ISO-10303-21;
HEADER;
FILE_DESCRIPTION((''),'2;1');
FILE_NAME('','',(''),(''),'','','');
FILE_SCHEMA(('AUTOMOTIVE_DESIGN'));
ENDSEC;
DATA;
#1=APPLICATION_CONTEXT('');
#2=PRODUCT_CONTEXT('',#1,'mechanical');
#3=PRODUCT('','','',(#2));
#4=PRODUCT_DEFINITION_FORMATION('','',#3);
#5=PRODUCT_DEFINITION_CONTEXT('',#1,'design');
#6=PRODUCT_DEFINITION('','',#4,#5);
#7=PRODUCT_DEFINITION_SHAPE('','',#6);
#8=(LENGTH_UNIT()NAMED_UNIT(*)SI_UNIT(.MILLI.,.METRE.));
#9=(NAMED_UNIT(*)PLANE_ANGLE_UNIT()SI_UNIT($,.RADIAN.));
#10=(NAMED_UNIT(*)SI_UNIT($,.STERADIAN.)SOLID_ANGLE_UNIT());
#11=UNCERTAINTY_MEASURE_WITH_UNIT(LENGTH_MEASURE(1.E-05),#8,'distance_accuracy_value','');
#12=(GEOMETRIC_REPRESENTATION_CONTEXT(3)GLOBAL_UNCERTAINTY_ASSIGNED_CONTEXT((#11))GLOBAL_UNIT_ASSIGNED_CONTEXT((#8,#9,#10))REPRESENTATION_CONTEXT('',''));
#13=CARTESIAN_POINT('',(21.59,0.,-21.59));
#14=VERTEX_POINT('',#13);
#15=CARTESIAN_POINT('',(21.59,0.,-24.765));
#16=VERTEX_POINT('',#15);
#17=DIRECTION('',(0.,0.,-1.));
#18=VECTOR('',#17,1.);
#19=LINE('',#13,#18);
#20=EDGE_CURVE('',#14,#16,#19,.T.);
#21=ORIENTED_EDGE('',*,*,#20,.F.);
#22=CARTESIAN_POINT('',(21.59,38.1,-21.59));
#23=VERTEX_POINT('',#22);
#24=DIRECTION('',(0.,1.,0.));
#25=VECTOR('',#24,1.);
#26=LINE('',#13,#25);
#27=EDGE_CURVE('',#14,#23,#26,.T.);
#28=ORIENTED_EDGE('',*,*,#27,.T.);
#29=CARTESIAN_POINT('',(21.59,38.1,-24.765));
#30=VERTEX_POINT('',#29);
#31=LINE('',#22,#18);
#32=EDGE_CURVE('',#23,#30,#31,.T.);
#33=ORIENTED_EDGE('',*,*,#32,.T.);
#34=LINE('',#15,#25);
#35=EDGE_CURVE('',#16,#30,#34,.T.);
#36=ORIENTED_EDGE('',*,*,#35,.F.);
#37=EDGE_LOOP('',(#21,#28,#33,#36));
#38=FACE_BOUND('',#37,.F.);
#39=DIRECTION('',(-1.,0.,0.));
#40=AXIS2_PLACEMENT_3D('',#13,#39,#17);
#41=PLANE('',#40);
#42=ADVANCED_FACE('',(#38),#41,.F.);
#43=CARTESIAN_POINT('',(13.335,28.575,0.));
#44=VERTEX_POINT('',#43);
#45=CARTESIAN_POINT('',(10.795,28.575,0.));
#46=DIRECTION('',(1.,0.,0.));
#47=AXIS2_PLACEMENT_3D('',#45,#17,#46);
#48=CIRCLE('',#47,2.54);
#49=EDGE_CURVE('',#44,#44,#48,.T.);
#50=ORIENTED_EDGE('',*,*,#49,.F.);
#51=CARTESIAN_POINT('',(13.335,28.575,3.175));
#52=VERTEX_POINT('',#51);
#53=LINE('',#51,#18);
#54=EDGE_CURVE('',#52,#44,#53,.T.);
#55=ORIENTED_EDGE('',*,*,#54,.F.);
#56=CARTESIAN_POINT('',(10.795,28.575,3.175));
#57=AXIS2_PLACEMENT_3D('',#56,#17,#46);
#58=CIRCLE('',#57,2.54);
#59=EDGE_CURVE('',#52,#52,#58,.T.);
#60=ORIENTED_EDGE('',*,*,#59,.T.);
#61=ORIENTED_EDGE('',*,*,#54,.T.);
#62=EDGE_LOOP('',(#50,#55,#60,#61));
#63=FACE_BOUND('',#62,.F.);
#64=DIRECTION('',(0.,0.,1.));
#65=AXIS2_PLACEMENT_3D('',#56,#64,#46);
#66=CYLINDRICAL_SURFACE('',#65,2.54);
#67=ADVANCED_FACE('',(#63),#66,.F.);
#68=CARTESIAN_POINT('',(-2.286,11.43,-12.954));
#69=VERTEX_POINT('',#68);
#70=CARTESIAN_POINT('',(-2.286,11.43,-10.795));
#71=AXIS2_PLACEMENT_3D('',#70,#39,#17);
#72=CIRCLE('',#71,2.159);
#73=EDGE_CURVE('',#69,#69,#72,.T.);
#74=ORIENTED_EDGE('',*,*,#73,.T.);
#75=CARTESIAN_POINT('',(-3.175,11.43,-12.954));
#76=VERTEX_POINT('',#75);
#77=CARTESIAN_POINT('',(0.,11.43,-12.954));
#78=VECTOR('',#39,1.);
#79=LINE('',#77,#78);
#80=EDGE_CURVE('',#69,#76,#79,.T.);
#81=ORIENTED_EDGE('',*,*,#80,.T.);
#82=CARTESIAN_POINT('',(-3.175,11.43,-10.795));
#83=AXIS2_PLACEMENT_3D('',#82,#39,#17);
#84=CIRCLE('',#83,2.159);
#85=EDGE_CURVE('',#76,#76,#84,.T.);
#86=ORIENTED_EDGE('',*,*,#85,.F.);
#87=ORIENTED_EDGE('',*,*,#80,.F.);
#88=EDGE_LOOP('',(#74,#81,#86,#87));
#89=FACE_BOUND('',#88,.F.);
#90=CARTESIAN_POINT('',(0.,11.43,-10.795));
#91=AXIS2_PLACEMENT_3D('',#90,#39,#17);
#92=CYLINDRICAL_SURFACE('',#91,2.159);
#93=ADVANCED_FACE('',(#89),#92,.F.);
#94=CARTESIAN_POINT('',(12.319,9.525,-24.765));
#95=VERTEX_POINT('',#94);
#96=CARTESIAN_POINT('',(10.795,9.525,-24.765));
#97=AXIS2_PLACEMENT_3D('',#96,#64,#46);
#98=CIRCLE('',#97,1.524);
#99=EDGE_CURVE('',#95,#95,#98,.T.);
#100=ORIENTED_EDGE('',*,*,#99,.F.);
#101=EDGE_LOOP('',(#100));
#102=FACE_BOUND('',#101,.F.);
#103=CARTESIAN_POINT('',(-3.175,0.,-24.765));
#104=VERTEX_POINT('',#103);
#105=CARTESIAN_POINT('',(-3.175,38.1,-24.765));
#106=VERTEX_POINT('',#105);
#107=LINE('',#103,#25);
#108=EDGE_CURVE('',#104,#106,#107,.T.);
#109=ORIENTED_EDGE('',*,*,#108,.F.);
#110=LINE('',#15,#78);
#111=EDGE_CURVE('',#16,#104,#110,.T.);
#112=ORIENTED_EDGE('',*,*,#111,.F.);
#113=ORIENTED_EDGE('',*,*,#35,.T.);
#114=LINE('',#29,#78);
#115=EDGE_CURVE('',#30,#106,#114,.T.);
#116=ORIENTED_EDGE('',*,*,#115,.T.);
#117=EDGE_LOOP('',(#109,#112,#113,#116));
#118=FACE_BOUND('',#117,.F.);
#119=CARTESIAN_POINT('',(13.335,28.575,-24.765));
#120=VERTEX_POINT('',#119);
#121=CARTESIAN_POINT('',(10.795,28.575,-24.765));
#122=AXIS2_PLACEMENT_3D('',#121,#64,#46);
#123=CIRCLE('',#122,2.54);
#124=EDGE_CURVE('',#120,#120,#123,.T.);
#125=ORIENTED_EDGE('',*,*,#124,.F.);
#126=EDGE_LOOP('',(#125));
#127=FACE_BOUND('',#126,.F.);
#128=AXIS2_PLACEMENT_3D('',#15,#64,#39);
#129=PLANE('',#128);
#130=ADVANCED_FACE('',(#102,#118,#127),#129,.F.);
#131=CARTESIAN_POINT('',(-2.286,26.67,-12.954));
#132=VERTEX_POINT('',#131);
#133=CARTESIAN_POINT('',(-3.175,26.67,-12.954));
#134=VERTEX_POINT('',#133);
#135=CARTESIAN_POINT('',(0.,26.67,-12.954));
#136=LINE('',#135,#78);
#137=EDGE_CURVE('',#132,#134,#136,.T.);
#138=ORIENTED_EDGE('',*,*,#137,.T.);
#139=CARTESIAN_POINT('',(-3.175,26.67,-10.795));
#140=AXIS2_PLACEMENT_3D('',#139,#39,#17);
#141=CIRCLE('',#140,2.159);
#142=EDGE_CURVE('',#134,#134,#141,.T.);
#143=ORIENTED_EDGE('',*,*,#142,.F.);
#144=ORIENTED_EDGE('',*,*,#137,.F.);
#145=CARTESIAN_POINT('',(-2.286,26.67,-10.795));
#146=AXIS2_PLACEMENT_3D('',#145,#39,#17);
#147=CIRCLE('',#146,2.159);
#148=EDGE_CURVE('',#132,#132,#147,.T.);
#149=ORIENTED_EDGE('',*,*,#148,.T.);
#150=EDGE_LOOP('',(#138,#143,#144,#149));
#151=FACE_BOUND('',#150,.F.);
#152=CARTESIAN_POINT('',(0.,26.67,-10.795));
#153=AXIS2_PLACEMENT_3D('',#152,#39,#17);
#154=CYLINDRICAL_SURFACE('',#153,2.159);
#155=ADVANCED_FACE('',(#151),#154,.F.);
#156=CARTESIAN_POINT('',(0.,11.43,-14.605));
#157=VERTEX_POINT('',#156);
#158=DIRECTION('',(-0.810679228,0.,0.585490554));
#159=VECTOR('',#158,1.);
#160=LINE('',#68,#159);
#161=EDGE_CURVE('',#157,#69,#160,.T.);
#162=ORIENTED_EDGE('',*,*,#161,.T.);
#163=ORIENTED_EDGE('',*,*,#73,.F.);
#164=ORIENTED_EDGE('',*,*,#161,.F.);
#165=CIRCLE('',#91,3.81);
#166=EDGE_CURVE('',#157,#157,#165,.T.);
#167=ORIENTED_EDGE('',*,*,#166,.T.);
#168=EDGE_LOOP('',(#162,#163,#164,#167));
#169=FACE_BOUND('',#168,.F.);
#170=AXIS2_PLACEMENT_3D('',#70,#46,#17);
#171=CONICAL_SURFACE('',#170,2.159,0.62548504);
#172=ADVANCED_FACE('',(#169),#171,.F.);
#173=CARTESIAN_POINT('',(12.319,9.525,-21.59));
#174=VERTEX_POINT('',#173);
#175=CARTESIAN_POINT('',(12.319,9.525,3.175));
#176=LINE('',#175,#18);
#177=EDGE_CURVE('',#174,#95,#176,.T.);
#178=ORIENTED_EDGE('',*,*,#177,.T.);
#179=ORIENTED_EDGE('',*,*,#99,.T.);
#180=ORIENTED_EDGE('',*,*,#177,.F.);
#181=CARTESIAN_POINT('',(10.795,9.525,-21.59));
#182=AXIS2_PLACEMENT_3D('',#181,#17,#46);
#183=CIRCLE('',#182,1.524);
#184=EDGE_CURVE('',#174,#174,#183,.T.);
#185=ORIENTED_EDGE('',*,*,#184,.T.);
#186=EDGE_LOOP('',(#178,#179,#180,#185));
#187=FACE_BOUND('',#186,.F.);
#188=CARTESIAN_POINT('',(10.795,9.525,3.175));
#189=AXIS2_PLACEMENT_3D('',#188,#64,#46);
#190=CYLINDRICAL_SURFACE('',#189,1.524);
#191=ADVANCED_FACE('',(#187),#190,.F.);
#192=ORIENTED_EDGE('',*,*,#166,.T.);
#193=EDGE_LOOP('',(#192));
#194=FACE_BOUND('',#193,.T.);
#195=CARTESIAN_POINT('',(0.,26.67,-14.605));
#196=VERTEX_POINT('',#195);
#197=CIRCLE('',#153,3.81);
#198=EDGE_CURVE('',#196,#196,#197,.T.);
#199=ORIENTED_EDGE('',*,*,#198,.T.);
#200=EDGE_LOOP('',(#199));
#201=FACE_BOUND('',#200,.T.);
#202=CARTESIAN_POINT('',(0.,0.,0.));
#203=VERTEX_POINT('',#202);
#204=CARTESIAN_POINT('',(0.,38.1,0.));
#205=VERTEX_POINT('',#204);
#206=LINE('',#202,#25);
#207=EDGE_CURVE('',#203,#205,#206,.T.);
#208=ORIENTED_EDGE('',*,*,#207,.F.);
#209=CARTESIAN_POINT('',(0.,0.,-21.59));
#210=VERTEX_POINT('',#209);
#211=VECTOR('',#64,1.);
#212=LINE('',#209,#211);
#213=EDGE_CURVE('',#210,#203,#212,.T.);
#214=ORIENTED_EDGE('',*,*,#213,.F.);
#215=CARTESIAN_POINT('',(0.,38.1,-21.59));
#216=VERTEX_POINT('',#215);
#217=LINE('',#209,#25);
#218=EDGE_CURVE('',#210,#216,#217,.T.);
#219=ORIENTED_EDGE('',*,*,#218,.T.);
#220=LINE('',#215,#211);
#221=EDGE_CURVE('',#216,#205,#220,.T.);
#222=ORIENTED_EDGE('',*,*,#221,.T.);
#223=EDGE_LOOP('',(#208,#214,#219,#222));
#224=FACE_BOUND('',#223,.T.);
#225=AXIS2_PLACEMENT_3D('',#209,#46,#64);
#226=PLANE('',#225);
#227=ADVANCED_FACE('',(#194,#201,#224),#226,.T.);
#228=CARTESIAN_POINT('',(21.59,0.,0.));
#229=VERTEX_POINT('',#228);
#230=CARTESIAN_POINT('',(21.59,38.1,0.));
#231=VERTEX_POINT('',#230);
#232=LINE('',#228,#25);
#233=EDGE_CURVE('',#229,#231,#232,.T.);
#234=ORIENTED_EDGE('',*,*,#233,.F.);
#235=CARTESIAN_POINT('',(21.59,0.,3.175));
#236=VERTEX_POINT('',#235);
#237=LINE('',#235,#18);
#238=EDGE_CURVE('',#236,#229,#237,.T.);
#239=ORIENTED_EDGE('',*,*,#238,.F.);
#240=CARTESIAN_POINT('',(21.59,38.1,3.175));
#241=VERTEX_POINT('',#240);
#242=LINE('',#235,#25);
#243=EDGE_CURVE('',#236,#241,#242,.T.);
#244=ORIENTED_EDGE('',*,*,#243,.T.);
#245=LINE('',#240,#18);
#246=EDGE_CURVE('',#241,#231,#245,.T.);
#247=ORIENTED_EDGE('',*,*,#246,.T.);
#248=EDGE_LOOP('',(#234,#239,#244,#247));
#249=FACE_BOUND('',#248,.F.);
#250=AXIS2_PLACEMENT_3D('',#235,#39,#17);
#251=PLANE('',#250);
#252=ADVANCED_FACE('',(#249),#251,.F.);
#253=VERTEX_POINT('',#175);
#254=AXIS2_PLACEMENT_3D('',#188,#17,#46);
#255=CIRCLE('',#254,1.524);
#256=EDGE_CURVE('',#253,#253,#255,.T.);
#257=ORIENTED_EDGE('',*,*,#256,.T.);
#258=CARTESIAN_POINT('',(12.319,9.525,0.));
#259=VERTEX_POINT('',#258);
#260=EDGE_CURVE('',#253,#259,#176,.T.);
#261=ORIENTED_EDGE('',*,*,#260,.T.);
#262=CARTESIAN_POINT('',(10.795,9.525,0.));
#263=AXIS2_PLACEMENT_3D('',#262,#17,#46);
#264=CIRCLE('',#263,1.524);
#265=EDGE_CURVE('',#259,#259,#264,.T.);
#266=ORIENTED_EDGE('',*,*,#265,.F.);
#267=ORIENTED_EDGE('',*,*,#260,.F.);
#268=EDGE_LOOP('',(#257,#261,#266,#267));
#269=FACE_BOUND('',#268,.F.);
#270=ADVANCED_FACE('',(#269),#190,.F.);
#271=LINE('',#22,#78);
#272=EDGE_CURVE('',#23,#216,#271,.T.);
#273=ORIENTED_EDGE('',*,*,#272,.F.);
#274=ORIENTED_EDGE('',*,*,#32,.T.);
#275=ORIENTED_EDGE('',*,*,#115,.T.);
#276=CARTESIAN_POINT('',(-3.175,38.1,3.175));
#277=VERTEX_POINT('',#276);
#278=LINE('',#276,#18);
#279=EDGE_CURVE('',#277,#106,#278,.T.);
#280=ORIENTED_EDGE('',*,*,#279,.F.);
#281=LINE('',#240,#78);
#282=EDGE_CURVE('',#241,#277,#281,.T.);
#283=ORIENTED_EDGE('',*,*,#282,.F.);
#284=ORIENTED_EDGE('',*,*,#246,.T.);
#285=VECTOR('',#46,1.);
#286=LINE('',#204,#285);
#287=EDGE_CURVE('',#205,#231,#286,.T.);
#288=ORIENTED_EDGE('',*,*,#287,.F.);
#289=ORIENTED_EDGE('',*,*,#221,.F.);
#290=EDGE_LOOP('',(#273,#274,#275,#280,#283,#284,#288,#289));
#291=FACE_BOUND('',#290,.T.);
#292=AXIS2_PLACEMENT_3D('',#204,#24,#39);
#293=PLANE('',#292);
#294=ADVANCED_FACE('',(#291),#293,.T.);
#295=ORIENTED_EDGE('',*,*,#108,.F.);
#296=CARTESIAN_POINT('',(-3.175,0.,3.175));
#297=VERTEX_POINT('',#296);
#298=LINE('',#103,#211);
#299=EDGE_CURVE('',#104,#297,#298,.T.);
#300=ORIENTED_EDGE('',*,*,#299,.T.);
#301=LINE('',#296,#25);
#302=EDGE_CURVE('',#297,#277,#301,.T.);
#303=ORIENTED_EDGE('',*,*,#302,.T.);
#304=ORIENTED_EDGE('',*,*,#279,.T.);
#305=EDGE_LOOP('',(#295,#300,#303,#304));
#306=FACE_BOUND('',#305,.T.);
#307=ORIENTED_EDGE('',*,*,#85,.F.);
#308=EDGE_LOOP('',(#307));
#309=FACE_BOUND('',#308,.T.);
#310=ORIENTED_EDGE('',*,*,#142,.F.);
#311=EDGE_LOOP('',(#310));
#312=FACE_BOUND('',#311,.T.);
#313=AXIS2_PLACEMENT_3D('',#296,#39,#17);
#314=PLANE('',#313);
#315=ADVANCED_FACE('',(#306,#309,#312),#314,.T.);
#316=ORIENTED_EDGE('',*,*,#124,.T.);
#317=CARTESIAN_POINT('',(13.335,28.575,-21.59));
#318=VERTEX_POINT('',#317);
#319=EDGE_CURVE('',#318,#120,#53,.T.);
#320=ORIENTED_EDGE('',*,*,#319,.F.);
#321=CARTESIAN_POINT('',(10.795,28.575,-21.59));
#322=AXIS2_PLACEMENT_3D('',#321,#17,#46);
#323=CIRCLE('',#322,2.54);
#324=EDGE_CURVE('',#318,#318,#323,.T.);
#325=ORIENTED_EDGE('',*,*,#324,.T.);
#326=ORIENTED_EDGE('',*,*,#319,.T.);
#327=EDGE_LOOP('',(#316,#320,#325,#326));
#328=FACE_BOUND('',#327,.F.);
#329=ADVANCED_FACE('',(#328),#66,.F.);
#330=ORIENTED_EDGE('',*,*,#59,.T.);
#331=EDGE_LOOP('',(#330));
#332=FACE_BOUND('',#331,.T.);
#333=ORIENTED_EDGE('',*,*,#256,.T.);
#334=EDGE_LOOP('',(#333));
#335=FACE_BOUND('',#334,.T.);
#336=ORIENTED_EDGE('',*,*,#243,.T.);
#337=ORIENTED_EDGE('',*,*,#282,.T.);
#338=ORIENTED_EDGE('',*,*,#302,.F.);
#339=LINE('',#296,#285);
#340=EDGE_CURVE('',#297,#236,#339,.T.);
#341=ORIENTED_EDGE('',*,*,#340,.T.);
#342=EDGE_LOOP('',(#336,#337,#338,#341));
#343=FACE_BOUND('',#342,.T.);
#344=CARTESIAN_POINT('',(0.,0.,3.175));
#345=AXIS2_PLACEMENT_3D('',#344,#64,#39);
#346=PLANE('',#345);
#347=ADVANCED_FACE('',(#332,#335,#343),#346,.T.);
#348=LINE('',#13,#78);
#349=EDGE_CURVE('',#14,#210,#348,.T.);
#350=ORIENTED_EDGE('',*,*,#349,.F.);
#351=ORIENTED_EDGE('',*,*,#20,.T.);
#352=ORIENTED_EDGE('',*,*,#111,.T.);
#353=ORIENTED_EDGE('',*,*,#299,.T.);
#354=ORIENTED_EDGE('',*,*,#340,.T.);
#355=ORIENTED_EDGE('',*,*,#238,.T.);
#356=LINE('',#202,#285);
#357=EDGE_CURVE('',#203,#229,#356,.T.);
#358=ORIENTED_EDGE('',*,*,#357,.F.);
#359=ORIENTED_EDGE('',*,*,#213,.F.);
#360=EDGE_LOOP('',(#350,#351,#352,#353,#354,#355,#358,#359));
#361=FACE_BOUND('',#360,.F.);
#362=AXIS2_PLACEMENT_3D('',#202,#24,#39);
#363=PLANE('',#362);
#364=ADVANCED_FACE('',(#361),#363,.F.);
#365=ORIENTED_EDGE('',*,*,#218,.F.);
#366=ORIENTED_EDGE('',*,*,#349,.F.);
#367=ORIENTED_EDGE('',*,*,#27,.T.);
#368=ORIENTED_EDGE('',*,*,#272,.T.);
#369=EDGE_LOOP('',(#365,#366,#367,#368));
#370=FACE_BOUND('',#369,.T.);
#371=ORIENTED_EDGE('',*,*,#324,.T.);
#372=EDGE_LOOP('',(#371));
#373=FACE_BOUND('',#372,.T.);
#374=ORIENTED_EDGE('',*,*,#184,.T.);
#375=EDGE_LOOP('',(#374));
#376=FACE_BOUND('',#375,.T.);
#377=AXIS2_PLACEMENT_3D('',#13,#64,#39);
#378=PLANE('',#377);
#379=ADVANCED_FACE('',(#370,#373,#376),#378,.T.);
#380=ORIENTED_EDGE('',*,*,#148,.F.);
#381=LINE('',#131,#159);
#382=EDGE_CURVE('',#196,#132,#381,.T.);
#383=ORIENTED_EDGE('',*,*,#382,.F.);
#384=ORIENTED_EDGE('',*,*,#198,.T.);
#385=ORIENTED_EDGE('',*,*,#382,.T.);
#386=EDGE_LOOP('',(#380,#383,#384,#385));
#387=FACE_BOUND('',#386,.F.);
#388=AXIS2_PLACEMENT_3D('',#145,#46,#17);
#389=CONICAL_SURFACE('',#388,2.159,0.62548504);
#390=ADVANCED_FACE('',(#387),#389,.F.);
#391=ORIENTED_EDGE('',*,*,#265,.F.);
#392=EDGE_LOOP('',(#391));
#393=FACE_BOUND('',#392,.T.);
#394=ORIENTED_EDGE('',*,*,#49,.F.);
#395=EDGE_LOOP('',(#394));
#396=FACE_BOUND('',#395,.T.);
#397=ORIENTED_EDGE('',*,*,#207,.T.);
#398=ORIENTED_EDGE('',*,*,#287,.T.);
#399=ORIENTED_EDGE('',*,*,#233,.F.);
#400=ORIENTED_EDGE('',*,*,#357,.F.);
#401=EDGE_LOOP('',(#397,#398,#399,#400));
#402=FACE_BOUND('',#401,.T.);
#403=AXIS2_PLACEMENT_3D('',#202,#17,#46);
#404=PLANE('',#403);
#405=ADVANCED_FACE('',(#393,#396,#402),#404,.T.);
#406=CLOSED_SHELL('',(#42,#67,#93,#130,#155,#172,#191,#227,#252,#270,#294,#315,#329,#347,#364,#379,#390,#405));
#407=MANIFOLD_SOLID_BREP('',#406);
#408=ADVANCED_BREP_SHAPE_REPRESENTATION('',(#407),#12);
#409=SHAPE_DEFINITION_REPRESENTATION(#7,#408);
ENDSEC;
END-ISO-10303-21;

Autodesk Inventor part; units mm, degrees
ref_plane "YZ Plane" through (0, 0, 0) normal (1, 0, 0) x (0, 1, 0)
ref_plane "XZ Plane" through (0, 0, 0) normal (0, 1, 0) x (-1, 0, 0)
ref_plane "XY Plane" through (0, 0, 0) normal (0, 0, 1) x (1, 0, 0)
sketch "Sketch1" plane through (0, 0, 0) normal (0, 1, 0) x (-1, 0, 0)
  line L0 (0, 0) -> (-21.59, 0)
  line L1 (-21.59, 0) -> (-21.59, -21.59)
  line L2 (-21.59, -21.59) -> (0, -21.59)
  line L3 (0, -21.59) -> (0, 0)
  line L4 (-21.59, 0) -> (0, 0)
  line L5 (0, 0) -> (0, 3.175)
  line L6 (0, 3.175) -> (-21.59, 3.175)
  line L7 (-21.59, 3.175) -> (-21.59, 0)
  line L8 (0, 3.175) -> (3.175, 3.175)
  line L9 (3.175, 3.175) -> (3.175, -21.59)
  line L10 (3.175, -21.59) -> (0, -21.59)
  line L11 (0, -21.59) -> (0, 3.175)
  line L12 (3.175, -21.59) -> (-21.59, -21.59)
  line L13 (-21.59, -21.59) -> (-21.59, -24.765)
  line L14 (-21.59, -24.765) -> (3.175, -24.765)
  line L15 (3.175, -24.765) -> (3.175, -21.59)
  dimension "d0" = 21.59
  dimension "d1" = 21.59
  dimension "d2" = 3.175
  dimension "d3" = 3.175
extrude "Extrusion1" add sketch "Sketch1" along normal blind 38.1 contours L5 L8 L9 L10 L3 | L0 L7 L6 L5 | L10 L15 L14 L13 L2
sketch "Sketch2" plane through (0, 0, 0) normal (1, 0, 0) x (0, 0, -1)
  line L0 (0, 0) -> (21.59, 0) projected
  line L1 (10.795, 0) -> (10.795, 11.43)
  line L2 (10.795, 0) -> (22.225, 0) construction
  line L3 (0, 38.1) -> (21.59, 38.1) projected
  line L4 (10.795, 38.1) -> (10.795, 26.67)
  line L5 (10.795, 38.1) -> (22.225, 38.1) construction
  circle A0 centre (10.795, 26.67) radius 2.159
  circle A1 centre (10.795, 11.43) radius 2.159
  dimension "d6" = 11.43
  dimension "d7" = 90
  dimension "d8" = 11.43
  dimension "d9" = 90
  dimension "d10" = 15.24
  dimension "d11" = 4.318
  dimension "d12" = 4.318
hole "Hole1" at (0, 26.67, -10.795) at (0, 11.43, -10.795) direction (-1, 0, 0) diameter 4.318 depth 25.4
sketch "Sketch3" plane through (-3.175, 0, 3.175) normal (0, 0, 1) x (1, 0, 0)
  line L0 (3.175, 38.1) -> (24.765, 38.1) projected
  line L1 (13.97, 38.1) -> (13.97, 28.575)
  circle A0 centre (13.97, 28.575) radius 2.54
  point P0 (3.175, 0)
  dimension "d20" = 9.525
  dimension "d21" = 5.08
extrude "Extrusion2" cut sketch "Sketch3" against normal blind 38.1
sketch "Sketch4" plane through (-3.175, 0, 3.175) normal (0, 0, 1) x (1, 0, 0)
  line L0 (24.765, 0) -> (3.175, 0) projected
  line L1 (13.97, 0) -> (13.97, 9.525)
  circle A0 centre (13.97, 9.525) radius 1.524
  dimension "d25" = 9.525
  dimension "d26" = 3.048
extrude "Extrusion3" cut sketch "Sketch4" against normal blind 38.1
chamfer "Chamfer1" distance 1.651 distance2 2.286 1 edges at (0, 26.67, -8.636) measured on face at (0, 21.4178, -2.8996)
chamfer "Chamfer2" distance 1.651 distance2 2.286 1 edges at (0, 11.43, -8.636) measured on face at (0, 21.2861, -2.3652)
properties part number "Silder Mount V1"
